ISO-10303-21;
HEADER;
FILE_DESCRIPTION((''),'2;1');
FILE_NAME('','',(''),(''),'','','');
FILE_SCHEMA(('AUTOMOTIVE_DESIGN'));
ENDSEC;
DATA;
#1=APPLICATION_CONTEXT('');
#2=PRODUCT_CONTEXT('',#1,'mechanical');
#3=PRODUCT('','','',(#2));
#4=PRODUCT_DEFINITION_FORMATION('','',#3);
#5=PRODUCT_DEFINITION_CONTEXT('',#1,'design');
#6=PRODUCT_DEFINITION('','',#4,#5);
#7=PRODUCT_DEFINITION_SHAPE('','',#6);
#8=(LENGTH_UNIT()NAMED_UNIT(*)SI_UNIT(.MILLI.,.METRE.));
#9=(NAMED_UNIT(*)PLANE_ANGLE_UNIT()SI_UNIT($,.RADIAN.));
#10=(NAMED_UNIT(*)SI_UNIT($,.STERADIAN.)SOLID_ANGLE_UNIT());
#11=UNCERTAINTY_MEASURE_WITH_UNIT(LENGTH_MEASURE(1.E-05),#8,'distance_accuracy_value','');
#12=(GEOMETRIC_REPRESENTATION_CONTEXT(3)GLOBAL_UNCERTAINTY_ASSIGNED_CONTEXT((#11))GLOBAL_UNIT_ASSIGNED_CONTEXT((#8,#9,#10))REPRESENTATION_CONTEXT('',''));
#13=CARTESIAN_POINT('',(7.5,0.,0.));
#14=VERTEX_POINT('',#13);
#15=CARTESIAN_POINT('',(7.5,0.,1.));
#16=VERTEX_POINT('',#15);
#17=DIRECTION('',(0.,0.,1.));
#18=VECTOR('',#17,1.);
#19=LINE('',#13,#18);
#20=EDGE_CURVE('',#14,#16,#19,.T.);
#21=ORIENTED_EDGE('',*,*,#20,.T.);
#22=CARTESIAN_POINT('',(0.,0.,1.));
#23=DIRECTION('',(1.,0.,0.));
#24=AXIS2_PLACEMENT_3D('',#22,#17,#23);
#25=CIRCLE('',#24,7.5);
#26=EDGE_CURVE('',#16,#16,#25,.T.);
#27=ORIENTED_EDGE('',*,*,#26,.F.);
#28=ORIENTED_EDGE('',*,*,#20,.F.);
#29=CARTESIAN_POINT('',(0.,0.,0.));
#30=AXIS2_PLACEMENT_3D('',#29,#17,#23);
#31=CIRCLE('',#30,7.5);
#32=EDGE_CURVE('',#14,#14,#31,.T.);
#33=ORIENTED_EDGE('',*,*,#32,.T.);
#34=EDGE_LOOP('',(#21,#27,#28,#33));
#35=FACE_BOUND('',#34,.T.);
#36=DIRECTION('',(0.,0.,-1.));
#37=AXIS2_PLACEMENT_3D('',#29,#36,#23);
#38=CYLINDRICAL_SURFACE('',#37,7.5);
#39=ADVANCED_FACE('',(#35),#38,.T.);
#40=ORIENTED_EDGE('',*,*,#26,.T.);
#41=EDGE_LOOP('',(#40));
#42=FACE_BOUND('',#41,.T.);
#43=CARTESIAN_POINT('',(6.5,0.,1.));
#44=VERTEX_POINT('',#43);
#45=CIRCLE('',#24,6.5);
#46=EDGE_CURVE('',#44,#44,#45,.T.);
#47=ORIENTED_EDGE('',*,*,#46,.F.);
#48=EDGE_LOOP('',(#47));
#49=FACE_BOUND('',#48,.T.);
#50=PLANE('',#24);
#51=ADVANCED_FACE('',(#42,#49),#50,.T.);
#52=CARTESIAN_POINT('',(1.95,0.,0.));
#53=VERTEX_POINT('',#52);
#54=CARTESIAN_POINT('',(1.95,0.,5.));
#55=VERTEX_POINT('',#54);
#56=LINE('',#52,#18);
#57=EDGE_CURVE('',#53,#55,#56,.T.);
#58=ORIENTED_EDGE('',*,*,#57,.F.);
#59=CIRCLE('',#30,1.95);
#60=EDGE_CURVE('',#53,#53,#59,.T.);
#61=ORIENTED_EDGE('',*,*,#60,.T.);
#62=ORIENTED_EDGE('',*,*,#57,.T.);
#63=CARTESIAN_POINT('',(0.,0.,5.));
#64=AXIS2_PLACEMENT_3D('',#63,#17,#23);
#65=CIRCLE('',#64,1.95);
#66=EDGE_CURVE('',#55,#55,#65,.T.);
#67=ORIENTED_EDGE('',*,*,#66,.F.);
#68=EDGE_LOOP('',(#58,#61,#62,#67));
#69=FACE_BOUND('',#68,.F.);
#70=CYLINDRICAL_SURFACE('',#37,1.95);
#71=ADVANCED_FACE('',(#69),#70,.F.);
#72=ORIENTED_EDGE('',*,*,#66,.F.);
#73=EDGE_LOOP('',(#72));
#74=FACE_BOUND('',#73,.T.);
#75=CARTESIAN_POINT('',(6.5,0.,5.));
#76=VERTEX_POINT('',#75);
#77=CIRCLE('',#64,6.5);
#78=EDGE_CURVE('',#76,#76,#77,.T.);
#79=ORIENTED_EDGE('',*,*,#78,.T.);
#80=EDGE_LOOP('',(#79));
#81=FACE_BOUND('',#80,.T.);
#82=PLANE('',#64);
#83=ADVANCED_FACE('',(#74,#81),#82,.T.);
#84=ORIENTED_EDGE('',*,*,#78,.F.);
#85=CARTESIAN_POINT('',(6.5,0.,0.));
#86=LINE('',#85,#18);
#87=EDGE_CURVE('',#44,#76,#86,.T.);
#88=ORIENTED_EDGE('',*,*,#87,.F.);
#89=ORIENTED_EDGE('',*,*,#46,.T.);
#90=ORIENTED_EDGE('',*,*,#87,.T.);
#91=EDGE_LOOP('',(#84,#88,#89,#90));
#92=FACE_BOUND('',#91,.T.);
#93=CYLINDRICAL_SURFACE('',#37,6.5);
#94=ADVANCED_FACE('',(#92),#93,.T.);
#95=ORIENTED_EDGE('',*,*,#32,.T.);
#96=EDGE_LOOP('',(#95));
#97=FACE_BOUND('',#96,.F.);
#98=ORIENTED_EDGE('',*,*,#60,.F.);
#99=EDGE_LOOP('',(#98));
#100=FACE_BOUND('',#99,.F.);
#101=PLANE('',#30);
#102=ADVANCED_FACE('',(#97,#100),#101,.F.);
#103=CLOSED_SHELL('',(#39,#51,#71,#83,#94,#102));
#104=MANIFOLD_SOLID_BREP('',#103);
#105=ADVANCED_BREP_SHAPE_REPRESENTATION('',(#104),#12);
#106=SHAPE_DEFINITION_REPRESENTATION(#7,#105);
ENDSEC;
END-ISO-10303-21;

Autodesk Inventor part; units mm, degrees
ref_plane "YZ Plane" through (0, 0, 0) normal (1, 0, 0) x (0, 1, 0)
ref_plane "XZ Plane" through (0, 0, 0) normal (0, 1, 0) x (-1, 0, 0)
ref_plane "XY Plane" through (0, 0, 0) normal (0, 0, 1) x (1, 0, 0)
sketch "Sketch1" plane through (0, 0, 0) normal (0, 0, 1) x (1, 0, 0)
  circle A0 centre (0, 0) radius 1.95
  circle A1 centre (0, 0) radius 6.5
  circle A2 centre (0, 0) radius 7.5
  circle A3 centre (0, 0) radius 2.85
  dimension "d0" = 3.9
  dimension "d1" = 13
  dimension "d2" = 15
  dimension "d7" = 0.9
extrude "Extrusion1" add sketch "Sketch1" along normal blind 1 contours A2
extrude "Extrusion2" add sketch "Sketch1" along normal blind 5 contours A1 | A3
properties part number "13mmOD Belt Bearing Half"
